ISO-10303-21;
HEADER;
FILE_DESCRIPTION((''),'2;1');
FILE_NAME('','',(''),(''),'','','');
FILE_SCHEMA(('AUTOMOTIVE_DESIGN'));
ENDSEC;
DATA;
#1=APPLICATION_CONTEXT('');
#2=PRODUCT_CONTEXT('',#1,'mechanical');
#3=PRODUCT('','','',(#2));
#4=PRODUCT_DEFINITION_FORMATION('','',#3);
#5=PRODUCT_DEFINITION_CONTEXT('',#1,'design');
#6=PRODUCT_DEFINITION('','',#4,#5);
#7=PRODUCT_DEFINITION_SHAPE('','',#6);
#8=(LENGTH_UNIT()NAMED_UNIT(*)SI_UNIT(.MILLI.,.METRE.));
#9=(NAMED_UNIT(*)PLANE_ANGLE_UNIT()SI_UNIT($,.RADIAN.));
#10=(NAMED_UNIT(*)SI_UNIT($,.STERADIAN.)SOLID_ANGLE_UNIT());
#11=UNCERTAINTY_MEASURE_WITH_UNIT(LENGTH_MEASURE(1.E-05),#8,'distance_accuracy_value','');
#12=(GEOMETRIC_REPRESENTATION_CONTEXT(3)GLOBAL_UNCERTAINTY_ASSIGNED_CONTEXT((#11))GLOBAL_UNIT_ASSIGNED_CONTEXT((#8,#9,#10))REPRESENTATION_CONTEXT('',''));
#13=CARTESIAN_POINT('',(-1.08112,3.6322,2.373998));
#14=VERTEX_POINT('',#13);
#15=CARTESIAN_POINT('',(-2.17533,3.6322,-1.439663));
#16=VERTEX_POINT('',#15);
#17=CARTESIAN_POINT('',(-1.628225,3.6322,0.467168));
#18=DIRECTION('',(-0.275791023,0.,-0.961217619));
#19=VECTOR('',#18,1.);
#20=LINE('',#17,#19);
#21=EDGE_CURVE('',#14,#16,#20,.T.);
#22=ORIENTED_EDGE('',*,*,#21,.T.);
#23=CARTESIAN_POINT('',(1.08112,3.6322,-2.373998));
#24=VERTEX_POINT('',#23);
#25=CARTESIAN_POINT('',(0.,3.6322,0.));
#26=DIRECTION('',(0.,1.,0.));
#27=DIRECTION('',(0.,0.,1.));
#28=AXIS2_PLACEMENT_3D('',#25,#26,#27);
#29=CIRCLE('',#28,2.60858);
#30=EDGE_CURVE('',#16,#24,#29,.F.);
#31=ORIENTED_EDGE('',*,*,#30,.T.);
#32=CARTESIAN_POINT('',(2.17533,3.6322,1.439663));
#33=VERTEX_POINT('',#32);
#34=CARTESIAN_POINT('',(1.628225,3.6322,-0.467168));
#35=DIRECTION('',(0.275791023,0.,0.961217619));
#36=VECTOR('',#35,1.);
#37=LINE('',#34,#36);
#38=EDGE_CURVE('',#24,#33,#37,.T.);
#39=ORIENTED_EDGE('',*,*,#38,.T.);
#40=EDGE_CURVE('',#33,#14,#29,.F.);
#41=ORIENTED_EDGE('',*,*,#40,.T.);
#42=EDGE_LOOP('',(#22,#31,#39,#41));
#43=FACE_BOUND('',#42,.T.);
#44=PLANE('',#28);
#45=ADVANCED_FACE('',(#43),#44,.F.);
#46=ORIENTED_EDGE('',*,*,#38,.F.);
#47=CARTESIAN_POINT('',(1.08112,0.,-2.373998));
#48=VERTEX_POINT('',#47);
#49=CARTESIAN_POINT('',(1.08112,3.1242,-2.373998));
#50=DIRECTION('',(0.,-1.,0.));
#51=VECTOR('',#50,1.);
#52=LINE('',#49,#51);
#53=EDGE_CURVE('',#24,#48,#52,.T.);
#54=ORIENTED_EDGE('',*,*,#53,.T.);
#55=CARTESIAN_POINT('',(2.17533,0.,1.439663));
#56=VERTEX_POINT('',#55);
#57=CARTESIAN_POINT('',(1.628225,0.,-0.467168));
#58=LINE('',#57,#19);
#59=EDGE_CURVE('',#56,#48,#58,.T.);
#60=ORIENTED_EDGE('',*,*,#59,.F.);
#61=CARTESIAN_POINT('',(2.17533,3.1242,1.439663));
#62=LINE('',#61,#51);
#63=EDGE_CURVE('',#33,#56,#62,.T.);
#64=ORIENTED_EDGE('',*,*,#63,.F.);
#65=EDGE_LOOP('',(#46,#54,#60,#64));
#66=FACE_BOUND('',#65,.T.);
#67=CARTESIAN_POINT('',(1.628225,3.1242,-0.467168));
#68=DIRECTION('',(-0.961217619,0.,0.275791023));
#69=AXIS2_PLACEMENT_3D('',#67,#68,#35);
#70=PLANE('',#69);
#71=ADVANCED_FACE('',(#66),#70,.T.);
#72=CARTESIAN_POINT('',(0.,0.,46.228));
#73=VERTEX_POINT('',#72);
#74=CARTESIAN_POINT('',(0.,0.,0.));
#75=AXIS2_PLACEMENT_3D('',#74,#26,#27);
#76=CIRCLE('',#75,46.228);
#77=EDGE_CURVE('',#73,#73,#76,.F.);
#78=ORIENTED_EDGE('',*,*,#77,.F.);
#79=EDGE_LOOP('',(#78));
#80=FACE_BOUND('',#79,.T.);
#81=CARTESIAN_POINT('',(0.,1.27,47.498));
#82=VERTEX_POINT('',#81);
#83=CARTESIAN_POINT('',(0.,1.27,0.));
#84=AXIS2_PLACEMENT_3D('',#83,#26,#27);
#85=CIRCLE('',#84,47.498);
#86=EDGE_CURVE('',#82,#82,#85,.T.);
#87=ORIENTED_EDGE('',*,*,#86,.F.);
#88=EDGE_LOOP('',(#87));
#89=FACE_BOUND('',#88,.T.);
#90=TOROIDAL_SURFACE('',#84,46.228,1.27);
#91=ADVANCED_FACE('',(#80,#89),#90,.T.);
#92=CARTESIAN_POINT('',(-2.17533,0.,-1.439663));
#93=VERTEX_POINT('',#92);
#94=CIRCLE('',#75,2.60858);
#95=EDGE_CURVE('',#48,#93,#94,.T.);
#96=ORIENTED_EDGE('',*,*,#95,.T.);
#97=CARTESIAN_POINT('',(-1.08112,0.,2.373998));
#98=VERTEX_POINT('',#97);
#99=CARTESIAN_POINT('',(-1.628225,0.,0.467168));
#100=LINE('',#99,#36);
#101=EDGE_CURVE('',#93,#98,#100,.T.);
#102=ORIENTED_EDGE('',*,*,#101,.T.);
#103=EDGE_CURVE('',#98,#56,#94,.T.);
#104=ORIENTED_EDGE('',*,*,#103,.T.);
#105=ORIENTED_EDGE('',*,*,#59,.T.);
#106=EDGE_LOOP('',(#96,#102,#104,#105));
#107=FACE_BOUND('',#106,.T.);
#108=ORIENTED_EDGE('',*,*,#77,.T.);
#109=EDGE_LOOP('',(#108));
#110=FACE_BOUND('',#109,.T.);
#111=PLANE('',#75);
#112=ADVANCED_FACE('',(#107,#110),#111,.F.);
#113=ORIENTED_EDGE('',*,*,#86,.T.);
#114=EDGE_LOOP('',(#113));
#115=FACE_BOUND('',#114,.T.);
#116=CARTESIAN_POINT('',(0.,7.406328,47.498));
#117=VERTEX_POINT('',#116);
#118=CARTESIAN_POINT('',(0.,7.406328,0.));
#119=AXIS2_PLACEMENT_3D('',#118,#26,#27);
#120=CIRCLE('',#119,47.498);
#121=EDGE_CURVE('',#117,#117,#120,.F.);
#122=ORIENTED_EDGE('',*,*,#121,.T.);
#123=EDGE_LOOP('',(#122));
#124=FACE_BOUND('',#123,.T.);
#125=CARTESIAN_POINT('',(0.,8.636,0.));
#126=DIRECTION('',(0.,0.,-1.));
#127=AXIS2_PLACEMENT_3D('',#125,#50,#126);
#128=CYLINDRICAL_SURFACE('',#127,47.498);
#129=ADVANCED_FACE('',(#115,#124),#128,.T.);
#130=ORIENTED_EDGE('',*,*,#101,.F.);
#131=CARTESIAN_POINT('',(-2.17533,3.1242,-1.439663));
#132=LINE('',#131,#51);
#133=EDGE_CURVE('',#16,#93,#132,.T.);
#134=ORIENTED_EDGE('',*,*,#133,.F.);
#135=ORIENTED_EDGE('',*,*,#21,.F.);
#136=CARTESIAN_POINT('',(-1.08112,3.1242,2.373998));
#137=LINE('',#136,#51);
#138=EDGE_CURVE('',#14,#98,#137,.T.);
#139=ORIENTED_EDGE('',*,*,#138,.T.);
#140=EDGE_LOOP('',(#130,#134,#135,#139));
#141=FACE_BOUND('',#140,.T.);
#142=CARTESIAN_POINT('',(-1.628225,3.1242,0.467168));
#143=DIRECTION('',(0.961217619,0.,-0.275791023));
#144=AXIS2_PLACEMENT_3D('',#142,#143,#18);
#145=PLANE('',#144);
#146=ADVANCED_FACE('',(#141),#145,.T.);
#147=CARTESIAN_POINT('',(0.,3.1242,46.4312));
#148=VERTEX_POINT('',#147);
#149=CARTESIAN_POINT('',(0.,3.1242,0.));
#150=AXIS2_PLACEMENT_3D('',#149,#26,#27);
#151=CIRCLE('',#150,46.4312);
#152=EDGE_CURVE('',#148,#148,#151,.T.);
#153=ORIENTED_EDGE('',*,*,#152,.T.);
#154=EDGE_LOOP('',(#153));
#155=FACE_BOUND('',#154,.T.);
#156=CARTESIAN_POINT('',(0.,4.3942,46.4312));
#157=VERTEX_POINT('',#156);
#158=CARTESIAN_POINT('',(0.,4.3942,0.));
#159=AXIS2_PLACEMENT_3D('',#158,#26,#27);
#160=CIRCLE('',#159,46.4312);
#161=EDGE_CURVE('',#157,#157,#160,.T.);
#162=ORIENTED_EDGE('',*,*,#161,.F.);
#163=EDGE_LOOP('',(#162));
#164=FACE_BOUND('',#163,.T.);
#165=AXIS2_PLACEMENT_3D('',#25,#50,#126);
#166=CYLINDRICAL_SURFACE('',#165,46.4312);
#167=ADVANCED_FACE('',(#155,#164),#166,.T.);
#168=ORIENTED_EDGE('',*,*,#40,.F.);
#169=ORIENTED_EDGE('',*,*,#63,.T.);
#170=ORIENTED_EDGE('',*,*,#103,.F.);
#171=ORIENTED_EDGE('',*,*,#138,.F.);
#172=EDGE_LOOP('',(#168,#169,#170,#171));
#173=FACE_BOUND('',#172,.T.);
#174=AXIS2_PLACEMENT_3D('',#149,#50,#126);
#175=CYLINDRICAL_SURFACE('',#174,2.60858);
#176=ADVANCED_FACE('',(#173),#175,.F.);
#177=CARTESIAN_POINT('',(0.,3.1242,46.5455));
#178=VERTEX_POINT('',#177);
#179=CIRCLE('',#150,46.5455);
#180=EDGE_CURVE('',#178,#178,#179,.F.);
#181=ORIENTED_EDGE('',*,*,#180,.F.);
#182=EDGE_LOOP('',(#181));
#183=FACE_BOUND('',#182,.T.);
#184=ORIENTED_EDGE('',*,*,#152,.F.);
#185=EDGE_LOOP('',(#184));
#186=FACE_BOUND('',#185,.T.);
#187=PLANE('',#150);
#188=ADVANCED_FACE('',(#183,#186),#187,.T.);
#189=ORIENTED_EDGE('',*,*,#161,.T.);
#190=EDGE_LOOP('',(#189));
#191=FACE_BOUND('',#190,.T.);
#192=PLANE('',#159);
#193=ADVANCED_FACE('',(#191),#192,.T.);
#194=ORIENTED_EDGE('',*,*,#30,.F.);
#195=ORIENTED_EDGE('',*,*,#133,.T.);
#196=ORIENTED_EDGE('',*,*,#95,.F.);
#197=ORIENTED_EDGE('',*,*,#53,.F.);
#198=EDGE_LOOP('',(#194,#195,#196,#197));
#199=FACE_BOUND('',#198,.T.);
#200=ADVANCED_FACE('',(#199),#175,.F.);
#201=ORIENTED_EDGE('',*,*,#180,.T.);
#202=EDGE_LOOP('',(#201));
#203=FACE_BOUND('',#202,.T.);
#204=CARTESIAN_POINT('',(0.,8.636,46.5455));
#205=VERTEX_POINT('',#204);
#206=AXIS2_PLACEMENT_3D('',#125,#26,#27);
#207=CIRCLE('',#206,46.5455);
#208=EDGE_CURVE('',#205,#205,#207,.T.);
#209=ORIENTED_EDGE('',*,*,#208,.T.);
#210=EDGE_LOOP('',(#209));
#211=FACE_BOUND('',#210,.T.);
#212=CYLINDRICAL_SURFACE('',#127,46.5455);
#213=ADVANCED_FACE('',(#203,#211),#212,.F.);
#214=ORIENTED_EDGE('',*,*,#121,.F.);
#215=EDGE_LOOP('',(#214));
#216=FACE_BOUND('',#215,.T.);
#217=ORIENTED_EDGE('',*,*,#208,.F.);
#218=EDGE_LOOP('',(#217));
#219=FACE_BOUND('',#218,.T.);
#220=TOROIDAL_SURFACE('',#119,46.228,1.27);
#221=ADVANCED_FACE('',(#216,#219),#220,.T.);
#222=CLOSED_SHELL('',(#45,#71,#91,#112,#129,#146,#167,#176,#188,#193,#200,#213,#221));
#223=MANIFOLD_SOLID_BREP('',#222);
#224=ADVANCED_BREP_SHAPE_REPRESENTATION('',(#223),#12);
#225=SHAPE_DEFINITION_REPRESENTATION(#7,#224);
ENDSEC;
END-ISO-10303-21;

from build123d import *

# Parameters (mm, degrees)
SKETCH1_R           = 46.5455
SKETCH1_R_2         = 2.60858
BOSS_EXTRUDE1_DEPTH = 3.1242
SKETCH1_5_R         = 47.498
SKETCH1_5_R_2       = 46.5455
BOSS_EXTRUDE2_DEPTH = 8.636
FILLET1_R           = 1.27
FILLET2_R           = 1.27
SKETCH2_R           = 46.4312
BOSS_EXTRUDE3_DEPTH = 0.508
SKETCH3_R           = 46.4312
BOSS_EXTRUDE4_DEPTH = 0.762


with BuildPart() as part:
    # Sketch1 → Boss-Extrude1 (new body)
    # profile 1 of 3: a face of its own
    with BuildSketch(Plane(origin=(0, 0, 0), x_dir=(1, 0, 0), z_dir=(0, 1, 0))):
        with Locations(Location((0, 0, 0), (0, 0, 270))):
            Circle(SKETCH1_R)
        Circle(SKETCH1_R_2, mode=Mode.SUBTRACT)
    # profile 2 of 3: a face of its own
    with BuildSketch(Plane(origin=(0, 0, 0), x_dir=(1, 0, 0), z_dir=(0, 1, 0))):
        with BuildLine():
            ThreePointArc((2.60858, 0), (2.193727268, 1.411470966), (1.081120394, 2.37399838))
            Line((1.081120394, 2.37399838), (2.175329976, -1.439662846))
            ThreePointArc((2.175329976, -1.439662846), (2.497920324, -0.751720475), (2.60858, 0))
        make_face()
    # profile 3 of 3: a face of its own
    with BuildSketch(Plane(origin=(0, 0, 0), x_dir=(1, 0, 0), z_dir=(0, 1, 0))):
        with BuildLine():
            Line((-1.081120394, -2.37399838), (-2.175329976, 1.439662846))
            ThreePointArc((-2.175329976, 1.439662846), (-2.507413058, -0.719422946), (-1.081120394, -2.37399838))
        make_face()
    extrude(amount=BOSS_EXTRUDE1_DEPTH)

    # Sketch1<5> → Boss-Extrude2 (add)
    with BuildSketch(Plane(origin=(0, 0, 0), x_dir=(1, 0, 0), z_dir=(0, 1, 0))):
        with Locations(Location((0, 0, 0), (0, 0, 270))):
            Circle(SKETCH1_5_R)
        with Locations(Location((0, 0, 0), (0, 0, 270))):
            Circle(SKETCH1_5_R_2, mode=Mode.SUBTRACT)
    extrude(amount=BOSS_EXTRUDE2_DEPTH)

    # Fillet1
    fillet1_edges = [part.edges().sort_by_distance(p)[0] for p in [
        (0, 0, -47.498),
    ]]
    fillet(fillet1_edges, radius=FILLET1_R)

    # Fillet2
    # the kernel refuses this fillet: 1.27 mm, written as the material it takes off along each edge
    with BuildSketch(Plane(origin=(0, 8.636, 0), x_dir=(0, 0, 1), z_dir=(-1, 0, 0))) as fillet2_piece_1:
        with BuildLine():
            CenterArc((46.228, -1.229672212), FILLET2_R, 0, 75.522487814)
            Line((46.5455, 0), (46.55185, 0.024593444))
            ThreePointArc((46.55185, 0.024593444), (47.02175, 0.0254), (47.498, 0.0254))
            Line((47.498, 0.0254), (47.5234, 0))
            Line((47.5234, 0), (47.5234, -1.229672212))
            Line((47.5234, -1.229672212), (47.498, -1.229672212))
        make_face()
    revolve(axis=Axis((0, 8.636, 0), (0, 1, 0)), mode=Mode.SUBTRACT)

    # Sketch2 → Boss-Extrude3 (add)
    with BuildSketch(Plane(origin=(0, 3.1242, 0), x_dir=(1, 0, 0), z_dir=(0, 1, 0))):
        with Locations(Location((0, 0, 0), (0, 0, 270))):
            Circle(SKETCH2_R)
        with BuildLine():
            Line((-1.081120394, -2.37399838), (-2.175329976, 1.439662846))
            ThreePointArc((-2.175329976, 1.439662846), (-0.719422946, 2.507413058), (1.081120394, 2.37399838))
            Line((1.081120394, 2.37399838), (2.175329976, -1.439662846))
            ThreePointArc((2.175329976, -1.439662846), (0.719422946, -2.507413058), (-1.081120394, -2.37399838))
        make_face(mode=Mode.SUBTRACT)
    extrude(amount=BOSS_EXTRUDE3_DEPTH)

    # Sketch3 → Boss-Extrude4 (add)
    with BuildSketch(Plane(origin=(0, 3.6322, 0), x_dir=(1, 0, 0), z_dir=(0, 1, 0))):
        with Locations(Location((0, 0, 0), (0, 0, 270))):
            Circle(SKETCH3_R)
    extrude(amount=BOSS_EXTRUDE4_DEPTH)


solid = part.part
